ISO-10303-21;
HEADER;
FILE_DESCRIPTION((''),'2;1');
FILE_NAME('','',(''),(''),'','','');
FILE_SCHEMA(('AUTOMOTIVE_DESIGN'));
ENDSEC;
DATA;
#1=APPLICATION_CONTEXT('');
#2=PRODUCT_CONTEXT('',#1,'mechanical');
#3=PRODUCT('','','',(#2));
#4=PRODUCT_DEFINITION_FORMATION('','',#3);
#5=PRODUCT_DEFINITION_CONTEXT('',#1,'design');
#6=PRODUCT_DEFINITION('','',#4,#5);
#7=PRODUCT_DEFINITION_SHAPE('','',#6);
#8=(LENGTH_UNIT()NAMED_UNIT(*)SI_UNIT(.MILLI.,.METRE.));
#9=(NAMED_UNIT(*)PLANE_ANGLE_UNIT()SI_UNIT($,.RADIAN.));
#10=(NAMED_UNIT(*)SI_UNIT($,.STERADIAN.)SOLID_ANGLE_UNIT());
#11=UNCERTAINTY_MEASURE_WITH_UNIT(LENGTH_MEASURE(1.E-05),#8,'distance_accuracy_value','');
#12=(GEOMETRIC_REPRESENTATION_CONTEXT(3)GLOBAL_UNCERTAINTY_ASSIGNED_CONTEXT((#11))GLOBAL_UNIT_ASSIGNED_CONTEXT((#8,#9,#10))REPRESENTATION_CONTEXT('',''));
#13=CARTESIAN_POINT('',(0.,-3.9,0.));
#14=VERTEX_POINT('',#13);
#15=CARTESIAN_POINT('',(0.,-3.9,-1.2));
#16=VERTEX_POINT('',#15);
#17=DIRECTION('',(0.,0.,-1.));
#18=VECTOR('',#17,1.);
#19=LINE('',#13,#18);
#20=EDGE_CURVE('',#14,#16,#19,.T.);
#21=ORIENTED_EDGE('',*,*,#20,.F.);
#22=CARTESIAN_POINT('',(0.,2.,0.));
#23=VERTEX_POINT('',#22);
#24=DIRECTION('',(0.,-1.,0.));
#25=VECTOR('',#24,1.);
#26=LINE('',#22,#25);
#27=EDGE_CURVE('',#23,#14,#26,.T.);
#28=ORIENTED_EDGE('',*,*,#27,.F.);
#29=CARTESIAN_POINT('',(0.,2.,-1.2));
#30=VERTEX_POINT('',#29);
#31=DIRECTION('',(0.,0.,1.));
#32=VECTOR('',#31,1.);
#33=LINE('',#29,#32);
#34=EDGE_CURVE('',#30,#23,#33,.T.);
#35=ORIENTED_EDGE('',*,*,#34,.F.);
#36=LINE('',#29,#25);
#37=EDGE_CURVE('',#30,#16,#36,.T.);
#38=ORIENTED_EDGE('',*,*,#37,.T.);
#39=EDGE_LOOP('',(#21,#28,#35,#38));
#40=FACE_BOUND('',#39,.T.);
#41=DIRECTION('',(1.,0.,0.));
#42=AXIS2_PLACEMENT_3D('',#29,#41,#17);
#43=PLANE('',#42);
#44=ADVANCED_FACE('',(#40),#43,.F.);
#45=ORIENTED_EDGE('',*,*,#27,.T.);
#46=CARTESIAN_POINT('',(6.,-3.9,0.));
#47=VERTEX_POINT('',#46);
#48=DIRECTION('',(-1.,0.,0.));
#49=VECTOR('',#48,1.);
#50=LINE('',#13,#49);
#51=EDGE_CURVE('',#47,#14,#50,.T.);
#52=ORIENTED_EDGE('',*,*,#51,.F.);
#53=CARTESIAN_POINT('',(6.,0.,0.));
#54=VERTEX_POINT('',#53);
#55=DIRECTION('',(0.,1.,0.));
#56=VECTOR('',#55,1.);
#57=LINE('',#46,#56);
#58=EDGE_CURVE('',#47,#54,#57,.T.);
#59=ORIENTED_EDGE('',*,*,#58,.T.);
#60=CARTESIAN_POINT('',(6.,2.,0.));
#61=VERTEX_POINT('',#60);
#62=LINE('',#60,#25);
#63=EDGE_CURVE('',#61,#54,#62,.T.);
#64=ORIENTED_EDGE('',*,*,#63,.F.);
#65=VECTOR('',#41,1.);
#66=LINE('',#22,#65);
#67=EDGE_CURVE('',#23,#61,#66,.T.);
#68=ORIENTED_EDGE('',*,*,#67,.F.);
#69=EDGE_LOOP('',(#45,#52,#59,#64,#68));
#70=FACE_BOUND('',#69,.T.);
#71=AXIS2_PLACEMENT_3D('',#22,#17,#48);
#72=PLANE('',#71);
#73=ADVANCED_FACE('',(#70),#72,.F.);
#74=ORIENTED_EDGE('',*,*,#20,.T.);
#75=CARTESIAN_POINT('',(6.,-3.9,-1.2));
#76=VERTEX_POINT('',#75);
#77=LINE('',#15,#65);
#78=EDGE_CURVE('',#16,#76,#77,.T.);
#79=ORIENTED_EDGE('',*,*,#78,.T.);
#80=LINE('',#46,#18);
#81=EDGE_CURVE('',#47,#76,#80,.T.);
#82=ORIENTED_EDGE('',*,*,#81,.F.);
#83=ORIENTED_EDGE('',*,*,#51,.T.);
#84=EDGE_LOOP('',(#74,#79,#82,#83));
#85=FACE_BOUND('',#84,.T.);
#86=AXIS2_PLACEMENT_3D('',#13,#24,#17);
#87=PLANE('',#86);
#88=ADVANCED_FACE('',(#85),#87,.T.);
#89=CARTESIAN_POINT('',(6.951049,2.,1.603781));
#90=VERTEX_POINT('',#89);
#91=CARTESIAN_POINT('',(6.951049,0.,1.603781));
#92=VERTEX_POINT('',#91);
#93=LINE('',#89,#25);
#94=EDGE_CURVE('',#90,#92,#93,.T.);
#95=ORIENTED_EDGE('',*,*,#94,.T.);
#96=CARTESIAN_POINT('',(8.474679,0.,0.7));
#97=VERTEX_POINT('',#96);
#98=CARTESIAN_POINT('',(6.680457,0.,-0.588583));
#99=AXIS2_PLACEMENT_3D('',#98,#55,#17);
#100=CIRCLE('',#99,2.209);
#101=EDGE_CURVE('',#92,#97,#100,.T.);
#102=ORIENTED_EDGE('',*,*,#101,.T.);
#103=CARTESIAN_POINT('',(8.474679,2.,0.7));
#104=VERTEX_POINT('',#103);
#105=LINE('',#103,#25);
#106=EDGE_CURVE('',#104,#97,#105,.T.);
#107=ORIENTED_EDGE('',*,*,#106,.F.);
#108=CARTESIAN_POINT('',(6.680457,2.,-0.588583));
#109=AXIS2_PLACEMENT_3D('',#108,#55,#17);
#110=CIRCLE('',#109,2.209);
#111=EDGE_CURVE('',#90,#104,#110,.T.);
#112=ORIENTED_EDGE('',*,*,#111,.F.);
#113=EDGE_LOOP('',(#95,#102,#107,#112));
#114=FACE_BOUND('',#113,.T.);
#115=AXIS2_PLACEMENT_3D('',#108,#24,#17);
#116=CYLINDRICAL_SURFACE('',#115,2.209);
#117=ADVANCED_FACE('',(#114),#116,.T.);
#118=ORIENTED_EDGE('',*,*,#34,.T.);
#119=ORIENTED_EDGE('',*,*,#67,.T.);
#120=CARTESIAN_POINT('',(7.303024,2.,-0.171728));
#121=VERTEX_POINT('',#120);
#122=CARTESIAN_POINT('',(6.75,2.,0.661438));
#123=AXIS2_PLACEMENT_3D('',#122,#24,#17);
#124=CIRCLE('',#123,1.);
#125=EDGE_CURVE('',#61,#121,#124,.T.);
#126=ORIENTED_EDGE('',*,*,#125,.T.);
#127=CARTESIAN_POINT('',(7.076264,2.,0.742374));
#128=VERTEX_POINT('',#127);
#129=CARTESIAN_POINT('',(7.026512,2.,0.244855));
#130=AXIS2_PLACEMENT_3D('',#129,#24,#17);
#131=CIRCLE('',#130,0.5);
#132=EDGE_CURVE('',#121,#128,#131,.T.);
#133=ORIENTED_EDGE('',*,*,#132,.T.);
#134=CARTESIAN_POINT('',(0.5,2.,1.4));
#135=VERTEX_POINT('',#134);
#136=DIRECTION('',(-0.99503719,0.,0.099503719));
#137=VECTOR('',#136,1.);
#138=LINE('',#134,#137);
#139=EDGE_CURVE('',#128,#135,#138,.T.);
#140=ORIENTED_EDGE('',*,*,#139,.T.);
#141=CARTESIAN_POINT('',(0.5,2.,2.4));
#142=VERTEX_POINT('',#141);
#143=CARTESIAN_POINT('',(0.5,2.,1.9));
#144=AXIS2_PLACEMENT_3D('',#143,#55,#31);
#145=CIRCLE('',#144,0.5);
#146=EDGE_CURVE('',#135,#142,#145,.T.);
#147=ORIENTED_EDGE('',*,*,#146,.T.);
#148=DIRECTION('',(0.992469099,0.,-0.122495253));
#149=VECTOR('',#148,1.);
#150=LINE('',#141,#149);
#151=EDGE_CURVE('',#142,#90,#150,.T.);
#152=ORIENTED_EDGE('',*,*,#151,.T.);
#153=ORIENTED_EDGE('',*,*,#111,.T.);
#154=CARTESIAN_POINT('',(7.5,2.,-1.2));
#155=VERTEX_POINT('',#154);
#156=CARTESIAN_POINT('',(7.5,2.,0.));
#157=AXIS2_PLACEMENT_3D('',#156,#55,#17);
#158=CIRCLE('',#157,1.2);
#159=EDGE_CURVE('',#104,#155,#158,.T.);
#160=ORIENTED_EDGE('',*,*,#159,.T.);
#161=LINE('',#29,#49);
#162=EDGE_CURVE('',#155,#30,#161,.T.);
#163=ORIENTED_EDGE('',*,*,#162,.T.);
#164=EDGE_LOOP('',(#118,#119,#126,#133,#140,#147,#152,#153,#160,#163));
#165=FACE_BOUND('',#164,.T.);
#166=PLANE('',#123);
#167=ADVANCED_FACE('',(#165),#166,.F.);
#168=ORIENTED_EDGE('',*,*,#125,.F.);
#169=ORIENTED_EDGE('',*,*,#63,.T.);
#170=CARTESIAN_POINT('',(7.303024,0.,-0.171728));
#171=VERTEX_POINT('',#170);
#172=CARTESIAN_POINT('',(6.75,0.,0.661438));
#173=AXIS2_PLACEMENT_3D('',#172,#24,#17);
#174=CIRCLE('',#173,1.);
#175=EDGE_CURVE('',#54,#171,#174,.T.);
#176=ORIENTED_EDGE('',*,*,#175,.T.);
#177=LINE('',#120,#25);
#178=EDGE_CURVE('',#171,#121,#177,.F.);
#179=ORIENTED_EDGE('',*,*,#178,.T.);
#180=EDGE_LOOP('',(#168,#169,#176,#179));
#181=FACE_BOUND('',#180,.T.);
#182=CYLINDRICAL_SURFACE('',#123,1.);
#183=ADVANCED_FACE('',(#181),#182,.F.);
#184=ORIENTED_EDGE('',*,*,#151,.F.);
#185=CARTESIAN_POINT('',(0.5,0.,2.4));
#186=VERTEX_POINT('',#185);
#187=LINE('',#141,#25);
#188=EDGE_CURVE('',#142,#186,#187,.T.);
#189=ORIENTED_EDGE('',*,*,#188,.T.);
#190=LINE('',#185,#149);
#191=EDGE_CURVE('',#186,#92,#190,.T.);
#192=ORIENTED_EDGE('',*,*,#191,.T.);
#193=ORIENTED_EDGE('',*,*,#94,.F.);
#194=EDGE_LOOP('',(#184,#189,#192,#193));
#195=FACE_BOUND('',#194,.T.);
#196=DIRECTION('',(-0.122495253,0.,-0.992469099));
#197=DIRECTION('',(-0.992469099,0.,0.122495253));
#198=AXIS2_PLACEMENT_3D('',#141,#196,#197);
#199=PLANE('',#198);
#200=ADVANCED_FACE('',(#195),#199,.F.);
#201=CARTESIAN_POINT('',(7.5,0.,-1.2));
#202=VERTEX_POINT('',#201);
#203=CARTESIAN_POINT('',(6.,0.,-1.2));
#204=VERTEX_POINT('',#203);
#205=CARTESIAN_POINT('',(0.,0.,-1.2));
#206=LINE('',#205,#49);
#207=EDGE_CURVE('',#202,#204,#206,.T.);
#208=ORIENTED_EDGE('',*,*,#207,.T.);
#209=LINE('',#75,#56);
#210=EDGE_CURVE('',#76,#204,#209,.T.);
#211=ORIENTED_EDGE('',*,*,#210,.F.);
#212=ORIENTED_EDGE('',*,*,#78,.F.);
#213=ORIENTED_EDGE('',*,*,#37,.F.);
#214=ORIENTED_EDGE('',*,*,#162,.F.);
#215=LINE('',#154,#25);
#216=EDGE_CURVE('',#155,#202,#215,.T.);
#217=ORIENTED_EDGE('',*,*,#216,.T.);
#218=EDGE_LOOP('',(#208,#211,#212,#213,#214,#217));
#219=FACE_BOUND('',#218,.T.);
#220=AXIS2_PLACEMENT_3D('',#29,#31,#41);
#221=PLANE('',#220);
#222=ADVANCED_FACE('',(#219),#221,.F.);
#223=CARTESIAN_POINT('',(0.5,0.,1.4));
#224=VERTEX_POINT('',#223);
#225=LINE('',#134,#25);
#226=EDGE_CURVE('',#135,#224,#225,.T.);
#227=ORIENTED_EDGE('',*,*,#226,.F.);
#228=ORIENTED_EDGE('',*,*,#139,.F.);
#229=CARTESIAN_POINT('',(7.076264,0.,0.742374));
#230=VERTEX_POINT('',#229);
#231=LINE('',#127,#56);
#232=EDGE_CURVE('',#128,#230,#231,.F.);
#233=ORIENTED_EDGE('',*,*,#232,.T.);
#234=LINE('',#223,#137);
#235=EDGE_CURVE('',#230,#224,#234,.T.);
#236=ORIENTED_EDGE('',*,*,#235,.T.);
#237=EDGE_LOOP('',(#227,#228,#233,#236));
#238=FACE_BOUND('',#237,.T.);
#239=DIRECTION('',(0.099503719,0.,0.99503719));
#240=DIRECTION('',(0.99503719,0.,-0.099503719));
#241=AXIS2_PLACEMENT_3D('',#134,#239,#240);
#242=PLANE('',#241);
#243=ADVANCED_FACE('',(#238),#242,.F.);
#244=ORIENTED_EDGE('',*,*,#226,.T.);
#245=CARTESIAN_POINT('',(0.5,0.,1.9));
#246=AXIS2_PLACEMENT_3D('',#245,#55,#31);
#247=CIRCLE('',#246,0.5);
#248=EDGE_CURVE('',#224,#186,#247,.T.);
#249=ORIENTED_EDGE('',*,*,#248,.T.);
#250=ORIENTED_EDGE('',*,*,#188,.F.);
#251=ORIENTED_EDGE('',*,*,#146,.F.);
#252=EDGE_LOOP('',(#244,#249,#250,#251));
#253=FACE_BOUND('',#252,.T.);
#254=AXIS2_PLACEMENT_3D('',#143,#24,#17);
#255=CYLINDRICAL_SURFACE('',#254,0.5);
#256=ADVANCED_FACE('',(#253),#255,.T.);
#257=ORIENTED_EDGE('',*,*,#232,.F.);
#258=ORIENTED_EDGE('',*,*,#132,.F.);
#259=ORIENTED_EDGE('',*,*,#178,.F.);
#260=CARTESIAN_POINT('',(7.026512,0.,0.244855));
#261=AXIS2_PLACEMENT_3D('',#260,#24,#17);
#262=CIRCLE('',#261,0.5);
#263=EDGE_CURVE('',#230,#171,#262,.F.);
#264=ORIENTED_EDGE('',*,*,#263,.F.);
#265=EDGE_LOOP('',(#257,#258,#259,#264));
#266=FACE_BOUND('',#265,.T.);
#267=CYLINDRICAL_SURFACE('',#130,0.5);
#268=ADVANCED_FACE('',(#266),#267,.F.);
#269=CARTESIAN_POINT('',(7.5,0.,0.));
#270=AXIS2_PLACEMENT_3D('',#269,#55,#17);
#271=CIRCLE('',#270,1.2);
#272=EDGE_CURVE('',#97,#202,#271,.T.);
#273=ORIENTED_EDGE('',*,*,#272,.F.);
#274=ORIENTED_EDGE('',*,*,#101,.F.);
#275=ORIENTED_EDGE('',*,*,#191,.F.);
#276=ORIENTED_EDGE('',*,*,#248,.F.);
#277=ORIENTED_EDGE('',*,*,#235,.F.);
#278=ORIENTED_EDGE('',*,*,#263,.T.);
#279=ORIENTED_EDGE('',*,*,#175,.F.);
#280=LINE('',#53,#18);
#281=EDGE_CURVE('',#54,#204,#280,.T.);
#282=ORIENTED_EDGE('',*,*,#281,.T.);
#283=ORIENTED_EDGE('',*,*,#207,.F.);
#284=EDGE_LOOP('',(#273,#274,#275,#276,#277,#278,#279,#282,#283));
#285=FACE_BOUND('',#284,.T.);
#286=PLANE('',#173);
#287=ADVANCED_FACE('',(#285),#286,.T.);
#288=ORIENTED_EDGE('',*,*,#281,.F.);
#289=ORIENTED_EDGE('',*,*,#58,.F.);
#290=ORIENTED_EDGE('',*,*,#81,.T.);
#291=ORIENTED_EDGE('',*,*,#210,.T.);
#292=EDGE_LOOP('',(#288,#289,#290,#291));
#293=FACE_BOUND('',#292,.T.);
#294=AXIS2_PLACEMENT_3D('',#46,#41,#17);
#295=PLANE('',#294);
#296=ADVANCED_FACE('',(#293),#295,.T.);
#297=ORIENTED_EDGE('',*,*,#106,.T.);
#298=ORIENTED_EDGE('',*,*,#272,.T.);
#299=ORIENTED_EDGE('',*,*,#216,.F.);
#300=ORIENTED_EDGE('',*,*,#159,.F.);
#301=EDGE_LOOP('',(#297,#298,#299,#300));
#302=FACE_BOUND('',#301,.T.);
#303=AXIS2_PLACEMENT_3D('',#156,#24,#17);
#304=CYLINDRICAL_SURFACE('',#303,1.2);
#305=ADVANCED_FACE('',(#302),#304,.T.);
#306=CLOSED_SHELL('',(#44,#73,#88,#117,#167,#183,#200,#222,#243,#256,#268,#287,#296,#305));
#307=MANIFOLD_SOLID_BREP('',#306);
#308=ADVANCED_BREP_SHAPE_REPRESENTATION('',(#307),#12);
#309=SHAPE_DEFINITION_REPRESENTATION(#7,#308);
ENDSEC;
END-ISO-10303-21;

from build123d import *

# Parameters (mm, degrees)
BOSS_EXTRUDE1_DEPTH = 2
SKETCH2_W           = 6
SKETCH2_H           = 1.2
BOSS_EXTRUDE2_DEPTH = 3.9
FILLET1_DEPTH       = 2


with BuildPart() as part:
    # Sketch1 → Boss-Extrude1 (new body)
    with BuildSketch(Plane(origin=(0, 0, 0), x_dir=(1, 0, 0), z_dir=(0, 1, 0))):
        with BuildLine():
            Line((0, 1.2), (7.5, 1.2))
            ThreePointArc((7.5, 1.2), (8.567707825, 0.547722558), (8.474679434, -0.7))
            ThreePointArc((8.474679434, -0.7), (7.807430734, -1.311314361), (6.951049145, -1.603780854))
            Line((6.951049145, -1.603780854), (0.5, -2.4))
            ThreePointArc((0.5, -2.4), (0, -1.9), (0.5, -1.4))
            Line((0.5, -1.4), (7.5, -0.7))
            ThreePointArc((7.5, -0.7), (7.642928579, -0.35), (7.5, 0))
            ThreePointArc((7.5, 0), (6.75, 0.338562172), (6, 0))
            Line((6, 0), (0, 0))
            Line((0, 0), (0, 1.2))
        make_face()
    extrude(amount=BOSS_EXTRUDE1_DEPTH)

    # Sketch2 → Boss-Extrude2 (add)
    with BuildSketch(Plane(origin=(0, 0, 0), x_dir=(1, 0, 0), z_dir=(0, 1, 0))):
        with Locations((3, 0.6)):
            Rectangle(SKETCH2_W, SKETCH2_H)
    extrude(amount=-BOSS_EXTRUDE2_DEPTH)

    # Fillet1: read off the stored shape, not the designer's step
    # Fillet1 outline → Fillet1 (add)
    with BuildSketch(Plane(origin=(0, 0, 0), x_dir=(1, 0, 0), z_dir=(0, 1, 0))):
        with BuildLine():
            ThreePointArc((7.5, 0), (7.407145524, 0.092325902), (7.303023614, 0.171727751))
            ThreePointArc((7.303023614, 0.171727751), (7.511802782, -0.365240542), (7.076263667, -0.742373633))
            Line((7.076263667, -0.742373633), (7.5, -0.7))
            ThreePointArc((7.5, -0.7), (7.642928579, -0.35), (7.5, 0))
        make_face()
    extrude(amount=FILLET1_DEPTH)


solid = part.part
